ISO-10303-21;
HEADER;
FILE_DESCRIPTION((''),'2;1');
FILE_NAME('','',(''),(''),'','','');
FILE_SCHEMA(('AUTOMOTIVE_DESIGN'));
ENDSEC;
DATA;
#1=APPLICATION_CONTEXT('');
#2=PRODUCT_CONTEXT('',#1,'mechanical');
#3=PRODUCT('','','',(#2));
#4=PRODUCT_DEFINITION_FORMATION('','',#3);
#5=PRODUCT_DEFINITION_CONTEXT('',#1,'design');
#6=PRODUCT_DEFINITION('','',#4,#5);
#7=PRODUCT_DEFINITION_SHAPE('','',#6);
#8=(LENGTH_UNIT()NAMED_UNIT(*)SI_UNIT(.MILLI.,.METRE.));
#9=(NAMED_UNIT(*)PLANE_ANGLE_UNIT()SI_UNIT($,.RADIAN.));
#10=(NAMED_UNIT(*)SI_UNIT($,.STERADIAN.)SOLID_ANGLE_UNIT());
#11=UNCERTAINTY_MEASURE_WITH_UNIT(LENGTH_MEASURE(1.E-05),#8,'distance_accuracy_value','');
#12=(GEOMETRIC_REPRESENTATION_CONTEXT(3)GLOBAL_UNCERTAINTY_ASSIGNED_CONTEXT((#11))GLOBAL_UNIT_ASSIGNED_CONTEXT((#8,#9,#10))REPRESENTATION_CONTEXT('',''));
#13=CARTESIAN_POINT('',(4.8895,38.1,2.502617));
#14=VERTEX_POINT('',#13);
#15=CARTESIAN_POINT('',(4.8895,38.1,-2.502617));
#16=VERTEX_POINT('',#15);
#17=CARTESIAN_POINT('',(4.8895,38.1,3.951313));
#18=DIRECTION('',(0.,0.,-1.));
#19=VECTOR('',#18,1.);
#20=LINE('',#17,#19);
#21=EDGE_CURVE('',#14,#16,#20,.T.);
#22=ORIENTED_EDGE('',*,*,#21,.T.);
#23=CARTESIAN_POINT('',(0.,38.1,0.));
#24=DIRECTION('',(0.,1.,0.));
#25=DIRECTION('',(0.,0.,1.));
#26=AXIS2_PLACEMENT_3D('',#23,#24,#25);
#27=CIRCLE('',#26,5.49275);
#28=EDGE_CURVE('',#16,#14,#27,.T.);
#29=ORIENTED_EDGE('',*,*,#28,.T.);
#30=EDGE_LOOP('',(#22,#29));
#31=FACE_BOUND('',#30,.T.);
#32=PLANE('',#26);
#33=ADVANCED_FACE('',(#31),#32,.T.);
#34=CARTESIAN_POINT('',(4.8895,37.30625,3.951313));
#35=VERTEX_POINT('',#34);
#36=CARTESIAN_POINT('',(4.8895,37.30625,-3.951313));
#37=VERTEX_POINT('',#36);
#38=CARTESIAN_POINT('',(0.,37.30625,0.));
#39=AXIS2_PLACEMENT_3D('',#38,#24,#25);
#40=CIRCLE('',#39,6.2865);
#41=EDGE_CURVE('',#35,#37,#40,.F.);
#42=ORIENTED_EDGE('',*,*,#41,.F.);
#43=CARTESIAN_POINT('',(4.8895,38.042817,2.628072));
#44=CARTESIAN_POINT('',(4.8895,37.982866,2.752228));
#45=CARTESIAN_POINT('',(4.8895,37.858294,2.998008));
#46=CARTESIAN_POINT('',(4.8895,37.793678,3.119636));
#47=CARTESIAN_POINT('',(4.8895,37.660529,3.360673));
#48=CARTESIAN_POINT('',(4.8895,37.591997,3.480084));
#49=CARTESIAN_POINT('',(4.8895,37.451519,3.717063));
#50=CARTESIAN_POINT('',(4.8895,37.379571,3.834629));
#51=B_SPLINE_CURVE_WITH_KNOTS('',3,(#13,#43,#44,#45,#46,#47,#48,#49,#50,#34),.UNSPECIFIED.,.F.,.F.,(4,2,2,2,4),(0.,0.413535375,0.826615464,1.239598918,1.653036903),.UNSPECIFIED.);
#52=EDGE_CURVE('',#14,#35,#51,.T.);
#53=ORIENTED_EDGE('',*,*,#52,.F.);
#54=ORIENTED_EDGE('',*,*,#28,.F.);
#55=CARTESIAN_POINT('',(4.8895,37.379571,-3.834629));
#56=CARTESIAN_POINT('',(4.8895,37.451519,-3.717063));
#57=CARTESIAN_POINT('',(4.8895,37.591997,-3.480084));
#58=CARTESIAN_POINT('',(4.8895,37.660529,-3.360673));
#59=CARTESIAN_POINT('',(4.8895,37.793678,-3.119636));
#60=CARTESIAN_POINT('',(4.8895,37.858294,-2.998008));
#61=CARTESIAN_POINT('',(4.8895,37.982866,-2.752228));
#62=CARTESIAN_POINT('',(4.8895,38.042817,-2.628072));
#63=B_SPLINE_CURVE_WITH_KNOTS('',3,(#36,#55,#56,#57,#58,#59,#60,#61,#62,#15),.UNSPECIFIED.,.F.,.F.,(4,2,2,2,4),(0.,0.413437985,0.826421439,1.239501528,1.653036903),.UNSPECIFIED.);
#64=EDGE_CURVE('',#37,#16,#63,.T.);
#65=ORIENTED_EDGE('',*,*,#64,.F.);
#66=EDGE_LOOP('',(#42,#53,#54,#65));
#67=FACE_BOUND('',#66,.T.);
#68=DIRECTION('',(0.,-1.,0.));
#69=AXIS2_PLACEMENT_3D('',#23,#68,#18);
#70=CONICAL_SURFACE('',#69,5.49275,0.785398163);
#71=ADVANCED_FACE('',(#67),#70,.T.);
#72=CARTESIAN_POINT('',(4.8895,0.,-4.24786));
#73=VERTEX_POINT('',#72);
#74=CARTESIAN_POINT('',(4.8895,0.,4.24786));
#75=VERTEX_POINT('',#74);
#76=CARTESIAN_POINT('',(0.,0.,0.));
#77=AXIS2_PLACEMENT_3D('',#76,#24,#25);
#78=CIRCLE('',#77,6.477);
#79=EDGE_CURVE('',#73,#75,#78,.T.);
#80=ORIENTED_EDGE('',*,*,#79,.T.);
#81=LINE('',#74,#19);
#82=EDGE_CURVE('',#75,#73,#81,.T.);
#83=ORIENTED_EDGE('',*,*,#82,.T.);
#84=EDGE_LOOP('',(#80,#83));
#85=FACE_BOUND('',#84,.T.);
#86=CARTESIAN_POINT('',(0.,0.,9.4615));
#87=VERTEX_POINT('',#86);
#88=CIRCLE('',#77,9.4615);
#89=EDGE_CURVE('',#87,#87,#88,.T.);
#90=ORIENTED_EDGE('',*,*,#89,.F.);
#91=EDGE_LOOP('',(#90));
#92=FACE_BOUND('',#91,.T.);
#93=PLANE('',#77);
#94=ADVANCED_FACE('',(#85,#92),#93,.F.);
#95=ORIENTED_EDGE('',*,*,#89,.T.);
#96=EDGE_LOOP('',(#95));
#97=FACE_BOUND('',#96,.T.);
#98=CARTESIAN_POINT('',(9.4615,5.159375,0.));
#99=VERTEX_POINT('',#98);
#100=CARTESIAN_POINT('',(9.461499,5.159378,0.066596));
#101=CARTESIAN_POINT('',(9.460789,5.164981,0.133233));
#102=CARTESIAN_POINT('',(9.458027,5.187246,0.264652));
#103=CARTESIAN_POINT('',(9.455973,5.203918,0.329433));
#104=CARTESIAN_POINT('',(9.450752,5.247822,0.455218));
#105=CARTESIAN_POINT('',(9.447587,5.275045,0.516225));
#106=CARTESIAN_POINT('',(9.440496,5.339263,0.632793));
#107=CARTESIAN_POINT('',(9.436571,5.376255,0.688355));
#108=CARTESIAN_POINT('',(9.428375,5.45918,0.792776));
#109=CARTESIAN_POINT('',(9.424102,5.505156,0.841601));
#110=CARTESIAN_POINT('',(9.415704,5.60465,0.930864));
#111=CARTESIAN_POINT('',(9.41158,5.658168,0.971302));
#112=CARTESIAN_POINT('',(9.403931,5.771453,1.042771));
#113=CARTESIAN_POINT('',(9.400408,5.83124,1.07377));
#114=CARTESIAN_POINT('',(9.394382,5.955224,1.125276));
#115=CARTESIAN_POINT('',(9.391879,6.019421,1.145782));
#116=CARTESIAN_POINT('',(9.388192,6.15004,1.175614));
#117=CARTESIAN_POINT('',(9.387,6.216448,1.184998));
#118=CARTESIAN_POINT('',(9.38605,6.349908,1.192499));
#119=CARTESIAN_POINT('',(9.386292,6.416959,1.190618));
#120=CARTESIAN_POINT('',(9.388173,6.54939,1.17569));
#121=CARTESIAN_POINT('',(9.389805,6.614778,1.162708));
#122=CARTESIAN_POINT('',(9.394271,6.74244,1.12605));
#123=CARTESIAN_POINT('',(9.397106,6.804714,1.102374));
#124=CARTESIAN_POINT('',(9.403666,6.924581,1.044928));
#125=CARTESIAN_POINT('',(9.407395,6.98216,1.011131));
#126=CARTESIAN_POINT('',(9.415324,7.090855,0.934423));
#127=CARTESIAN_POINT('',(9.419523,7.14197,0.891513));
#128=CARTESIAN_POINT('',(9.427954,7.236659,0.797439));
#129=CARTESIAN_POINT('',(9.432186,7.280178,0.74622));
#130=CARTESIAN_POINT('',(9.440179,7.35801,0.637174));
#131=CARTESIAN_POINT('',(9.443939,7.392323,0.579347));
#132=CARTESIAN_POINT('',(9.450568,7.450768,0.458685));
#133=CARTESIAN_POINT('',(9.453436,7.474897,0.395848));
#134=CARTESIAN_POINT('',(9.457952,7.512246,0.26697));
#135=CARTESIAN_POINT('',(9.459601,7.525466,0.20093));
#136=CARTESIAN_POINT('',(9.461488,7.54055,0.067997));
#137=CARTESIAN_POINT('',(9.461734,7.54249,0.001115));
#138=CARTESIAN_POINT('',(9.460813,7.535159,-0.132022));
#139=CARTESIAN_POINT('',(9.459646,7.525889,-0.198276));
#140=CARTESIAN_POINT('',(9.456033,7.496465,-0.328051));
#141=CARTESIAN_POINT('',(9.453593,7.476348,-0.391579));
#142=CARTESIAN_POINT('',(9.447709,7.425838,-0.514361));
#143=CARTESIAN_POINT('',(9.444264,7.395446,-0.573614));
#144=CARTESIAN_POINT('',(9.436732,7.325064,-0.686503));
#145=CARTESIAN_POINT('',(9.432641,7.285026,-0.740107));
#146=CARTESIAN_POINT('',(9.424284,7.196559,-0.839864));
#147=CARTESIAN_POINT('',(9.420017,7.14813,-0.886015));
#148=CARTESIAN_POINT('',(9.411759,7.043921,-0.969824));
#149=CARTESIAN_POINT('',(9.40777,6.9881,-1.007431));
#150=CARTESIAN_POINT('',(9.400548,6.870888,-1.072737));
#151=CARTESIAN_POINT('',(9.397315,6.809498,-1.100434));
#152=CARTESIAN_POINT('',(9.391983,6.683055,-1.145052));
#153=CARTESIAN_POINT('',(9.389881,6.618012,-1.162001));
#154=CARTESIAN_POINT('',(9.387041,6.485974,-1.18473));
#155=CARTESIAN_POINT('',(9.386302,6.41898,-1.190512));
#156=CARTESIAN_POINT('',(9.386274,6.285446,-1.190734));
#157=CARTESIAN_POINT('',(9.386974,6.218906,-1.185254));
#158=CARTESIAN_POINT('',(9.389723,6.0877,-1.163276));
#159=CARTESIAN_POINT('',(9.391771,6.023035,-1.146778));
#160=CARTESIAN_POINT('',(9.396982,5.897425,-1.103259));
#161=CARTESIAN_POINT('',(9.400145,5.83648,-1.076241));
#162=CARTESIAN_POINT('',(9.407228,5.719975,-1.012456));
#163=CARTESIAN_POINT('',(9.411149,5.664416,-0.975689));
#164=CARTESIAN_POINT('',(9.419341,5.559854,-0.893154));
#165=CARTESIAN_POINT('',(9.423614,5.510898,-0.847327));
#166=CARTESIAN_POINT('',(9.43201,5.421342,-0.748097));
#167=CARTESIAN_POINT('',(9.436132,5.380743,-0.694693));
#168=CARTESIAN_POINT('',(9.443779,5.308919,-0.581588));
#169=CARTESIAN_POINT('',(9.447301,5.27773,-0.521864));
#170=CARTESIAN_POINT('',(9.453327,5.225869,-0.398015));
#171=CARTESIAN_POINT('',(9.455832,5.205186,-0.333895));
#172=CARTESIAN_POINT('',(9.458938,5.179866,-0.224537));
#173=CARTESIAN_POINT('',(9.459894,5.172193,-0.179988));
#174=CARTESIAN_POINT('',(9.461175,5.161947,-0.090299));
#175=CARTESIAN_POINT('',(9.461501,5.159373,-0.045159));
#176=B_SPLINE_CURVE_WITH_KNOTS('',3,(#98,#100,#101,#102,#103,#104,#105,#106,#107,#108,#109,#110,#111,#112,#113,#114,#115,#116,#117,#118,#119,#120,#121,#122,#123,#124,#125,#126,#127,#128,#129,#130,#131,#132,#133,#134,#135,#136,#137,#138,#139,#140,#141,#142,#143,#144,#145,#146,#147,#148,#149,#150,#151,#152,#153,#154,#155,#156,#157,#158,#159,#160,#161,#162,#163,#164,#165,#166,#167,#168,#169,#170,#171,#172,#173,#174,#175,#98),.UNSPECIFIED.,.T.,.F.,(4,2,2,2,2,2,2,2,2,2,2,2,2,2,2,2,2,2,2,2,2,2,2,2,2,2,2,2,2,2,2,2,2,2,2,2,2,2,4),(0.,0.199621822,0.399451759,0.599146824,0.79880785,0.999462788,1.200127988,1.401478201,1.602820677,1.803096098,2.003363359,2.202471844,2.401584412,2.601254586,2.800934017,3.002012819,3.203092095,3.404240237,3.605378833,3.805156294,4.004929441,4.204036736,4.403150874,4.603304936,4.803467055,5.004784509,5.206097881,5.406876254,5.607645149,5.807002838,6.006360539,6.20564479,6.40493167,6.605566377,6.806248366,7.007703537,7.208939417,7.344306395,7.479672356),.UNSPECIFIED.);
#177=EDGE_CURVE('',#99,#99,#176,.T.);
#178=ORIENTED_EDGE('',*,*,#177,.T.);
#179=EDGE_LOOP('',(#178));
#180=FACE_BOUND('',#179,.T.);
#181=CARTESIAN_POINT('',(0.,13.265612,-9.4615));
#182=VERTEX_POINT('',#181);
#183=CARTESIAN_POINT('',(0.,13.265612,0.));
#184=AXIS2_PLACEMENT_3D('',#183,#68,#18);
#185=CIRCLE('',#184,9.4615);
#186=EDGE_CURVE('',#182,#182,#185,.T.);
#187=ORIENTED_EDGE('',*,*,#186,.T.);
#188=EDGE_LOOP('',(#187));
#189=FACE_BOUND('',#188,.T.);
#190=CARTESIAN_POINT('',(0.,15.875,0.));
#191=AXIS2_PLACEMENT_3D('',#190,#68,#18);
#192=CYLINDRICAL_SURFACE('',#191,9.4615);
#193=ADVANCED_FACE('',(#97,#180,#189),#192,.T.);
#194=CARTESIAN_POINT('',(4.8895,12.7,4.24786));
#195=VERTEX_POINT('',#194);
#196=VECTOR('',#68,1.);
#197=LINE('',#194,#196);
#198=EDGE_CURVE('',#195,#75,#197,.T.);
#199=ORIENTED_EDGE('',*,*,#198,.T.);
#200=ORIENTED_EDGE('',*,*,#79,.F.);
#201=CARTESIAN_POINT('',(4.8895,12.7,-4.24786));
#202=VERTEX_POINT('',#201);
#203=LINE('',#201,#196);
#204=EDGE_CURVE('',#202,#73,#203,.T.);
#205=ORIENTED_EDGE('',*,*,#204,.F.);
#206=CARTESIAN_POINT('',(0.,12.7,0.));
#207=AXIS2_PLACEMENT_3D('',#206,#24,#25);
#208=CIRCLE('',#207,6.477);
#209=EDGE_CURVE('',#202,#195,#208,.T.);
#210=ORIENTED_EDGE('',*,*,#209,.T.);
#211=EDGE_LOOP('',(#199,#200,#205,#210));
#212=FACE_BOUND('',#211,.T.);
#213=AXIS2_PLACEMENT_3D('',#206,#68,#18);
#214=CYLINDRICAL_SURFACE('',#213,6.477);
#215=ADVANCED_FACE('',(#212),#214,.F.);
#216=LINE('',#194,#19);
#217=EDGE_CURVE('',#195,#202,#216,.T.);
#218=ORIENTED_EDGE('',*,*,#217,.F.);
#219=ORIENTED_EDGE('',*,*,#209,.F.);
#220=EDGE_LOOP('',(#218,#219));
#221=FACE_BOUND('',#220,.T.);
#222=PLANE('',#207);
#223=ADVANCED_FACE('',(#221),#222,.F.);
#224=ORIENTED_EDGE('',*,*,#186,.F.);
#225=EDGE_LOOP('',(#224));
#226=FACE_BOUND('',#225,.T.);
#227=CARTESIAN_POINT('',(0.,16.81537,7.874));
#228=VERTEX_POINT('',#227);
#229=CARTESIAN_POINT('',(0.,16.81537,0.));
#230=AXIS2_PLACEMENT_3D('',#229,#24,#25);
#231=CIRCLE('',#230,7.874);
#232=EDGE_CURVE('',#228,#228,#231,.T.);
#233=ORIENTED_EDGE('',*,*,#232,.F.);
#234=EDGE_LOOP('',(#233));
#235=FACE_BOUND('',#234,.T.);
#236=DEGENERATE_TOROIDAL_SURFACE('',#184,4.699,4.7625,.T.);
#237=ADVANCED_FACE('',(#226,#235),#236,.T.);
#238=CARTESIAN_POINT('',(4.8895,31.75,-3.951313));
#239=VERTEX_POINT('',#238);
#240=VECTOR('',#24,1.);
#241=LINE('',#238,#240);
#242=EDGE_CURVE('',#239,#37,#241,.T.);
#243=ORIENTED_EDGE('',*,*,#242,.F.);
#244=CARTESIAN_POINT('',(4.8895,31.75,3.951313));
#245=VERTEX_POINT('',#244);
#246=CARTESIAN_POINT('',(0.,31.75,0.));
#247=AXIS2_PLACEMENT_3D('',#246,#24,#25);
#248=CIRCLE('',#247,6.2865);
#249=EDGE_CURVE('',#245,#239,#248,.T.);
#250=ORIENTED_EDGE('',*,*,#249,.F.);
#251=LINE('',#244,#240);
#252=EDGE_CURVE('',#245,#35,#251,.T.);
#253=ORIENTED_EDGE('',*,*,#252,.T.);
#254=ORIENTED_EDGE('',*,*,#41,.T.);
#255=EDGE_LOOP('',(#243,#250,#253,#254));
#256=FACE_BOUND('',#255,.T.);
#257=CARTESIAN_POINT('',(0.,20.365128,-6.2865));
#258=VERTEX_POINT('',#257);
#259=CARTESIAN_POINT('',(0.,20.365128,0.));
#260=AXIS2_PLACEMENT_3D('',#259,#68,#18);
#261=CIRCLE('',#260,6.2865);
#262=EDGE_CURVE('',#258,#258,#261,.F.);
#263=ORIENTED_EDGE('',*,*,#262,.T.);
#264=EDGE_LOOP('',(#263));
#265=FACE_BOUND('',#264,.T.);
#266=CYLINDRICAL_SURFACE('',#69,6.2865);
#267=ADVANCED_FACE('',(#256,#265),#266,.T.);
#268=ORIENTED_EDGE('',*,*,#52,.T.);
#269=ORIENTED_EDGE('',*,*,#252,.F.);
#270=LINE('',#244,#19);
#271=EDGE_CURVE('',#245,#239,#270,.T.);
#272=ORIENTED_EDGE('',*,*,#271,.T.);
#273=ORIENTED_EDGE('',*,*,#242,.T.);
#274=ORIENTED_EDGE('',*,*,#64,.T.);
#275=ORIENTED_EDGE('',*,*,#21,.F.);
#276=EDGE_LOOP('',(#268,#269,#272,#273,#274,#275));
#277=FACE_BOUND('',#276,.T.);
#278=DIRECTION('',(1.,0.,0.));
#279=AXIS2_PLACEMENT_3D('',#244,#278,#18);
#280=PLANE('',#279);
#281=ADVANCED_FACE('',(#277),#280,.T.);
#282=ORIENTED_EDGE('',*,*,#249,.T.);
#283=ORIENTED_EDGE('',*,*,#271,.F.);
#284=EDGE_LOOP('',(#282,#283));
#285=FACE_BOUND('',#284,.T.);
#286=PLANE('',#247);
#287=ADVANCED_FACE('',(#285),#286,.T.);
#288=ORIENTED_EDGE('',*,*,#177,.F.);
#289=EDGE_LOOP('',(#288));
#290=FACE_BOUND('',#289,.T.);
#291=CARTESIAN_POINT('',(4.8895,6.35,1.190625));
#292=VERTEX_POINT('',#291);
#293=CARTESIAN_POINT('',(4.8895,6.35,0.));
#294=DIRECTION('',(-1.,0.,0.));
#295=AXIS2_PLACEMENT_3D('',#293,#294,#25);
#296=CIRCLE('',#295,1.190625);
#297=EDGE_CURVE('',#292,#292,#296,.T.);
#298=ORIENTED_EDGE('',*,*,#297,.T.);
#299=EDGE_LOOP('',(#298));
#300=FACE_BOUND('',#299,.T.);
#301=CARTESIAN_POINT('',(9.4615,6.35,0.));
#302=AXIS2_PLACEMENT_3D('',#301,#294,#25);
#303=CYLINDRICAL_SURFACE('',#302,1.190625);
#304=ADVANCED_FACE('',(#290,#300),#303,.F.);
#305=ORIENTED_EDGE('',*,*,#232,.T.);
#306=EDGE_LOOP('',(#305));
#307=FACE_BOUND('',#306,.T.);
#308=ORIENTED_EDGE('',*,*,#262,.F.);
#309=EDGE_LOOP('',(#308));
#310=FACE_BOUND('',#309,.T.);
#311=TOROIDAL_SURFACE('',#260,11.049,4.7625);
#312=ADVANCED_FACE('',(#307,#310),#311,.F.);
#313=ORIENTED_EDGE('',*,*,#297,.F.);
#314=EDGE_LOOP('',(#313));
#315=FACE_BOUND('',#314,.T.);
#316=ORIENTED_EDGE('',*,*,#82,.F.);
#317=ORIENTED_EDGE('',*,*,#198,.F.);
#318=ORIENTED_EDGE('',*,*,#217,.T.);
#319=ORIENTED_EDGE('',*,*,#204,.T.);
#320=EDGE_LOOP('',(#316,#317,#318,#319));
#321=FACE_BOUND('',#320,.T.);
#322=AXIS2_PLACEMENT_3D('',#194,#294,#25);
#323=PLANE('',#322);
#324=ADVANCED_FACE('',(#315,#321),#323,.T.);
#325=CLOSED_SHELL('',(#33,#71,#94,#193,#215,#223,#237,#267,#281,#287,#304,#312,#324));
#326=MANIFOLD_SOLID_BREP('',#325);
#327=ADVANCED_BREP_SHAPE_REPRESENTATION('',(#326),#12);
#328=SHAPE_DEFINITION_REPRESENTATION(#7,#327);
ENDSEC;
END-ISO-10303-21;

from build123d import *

# Parameters (mm, degrees)
SKETCH1_R           = 6.2865
BASE_EXTRUDE_DEPTH  = 38.1
SKETCH3_R           = 9.4615
BOSS_EXTRUDE1_DEPTH = 15.875
CUT_EXTRUDE1_DEPTH  = 12.7
FILLET1_R           = 4.7625
FILLET2_R           = 4.7625
SKETCH5_R           = 1.190625
CUT_EXTRUDE2_DEPTH  = 42.798101456
CUT_EXTRUDE3_START  = -6.35
CUT_EXTRUDE3_DEPTH  = 6.35
CHAMFER1_SIZE       = 0.79375


with BuildPart() as part:
    # Sketch1 → Base-Extrude (new body)
    with BuildSketch(Plane(origin=(0, 0, 0), x_dir=(-1, 0, 0), z_dir=(0, 1, 0))):
        with Locations(Location((0, 0, 0), (0, 0, 270))):
            Circle(SKETCH1_R)
    extrude(amount=BASE_EXTRUDE_DEPTH)

    # Sketch3 → Boss-Extrude1 (add)
    with BuildSketch(Plane(origin=(0, 0, 0), x_dir=(-1, 0, 0), z_dir=(0, 1, 0))):
        with Locations(Location((0, 0, 0), (0, 0, 90))):
            Circle(SKETCH3_R)
    extrude(amount=BOSS_EXTRUDE1_DEPTH)

    # Sketch4 → Cut-Extrude1 (cut)
    with BuildSketch(Plane(origin=(0, 0, 0), x_dir=(-1, 0, 0), z_dir=(0, 1, 0))):
        with BuildLine():
            Line((-4.8895, 4.247860491), (-4.8895, -4.247860491))
            ThreePointArc((-4.8895, -4.247860491), (6.477, 0), (-4.8895, 4.247860491))
        make_face()
    extrude(amount=CUT_EXTRUDE1_DEPTH, mode=Mode.SUBTRACT)

    # Fillet1
    # the kernel refuses this fillet: 4.7625 mm, written as the material it adds along each edge
    with BuildSketch(Plane(origin=(0, 15.875, 0), x_dir=(0, 0, -1), z_dir=(-1, 0, 0))) as fillet1_piece_1:
        with BuildLine():
            CenterArc((11.049, -4.490128061), FILLET1_R, 109.471220634, 70.528779366)
            Line((6.2865, -4.490128061), (6.19125, -4.490128061))
            Line((6.19125, -4.490128061), (6.19125, 0))
            Line((6.19125, 0), (6.2865, 0.09525))
            ThreePointArc((6.2865, 0.09525), (7.874, 0.09525), (9.42975, 0.089802561))
            Line((9.42975, 0.089802561), (9.4615, 0))
        make_face()
    revolve(axis=Axis((0, 15.875, 0), (0, -1, 0)))

    # Fillet2
    fillet2_edges = [part.edges().sort_by_distance(p)[0] for p in [
        (9.4615, 15.875, 0),
    ]]
    fillet(fillet2_edges, radius=FILLET2_R)

    # Sketch5 → Cut-Extrude2 (cut, through all)
    with BuildSketch(Plane.ZY.offset(-4.8895)):
        with Locations((0, 6.35)):
            Circle(SKETCH5_R)
    extrude(amount=-CUT_EXTRUDE2_DEPTH, mode=Mode.SUBTRACT)

    # Sketch7 → Cut-Extrude3 (cut)
    with BuildSketch(Plane(origin=(0, 38.1, 0), x_dir=(-1, 0, 0), z_dir=(0, 1, 0)).offset(CUT_EXTRUDE3_START)):
        with BuildLine():
            Line((-4.8895, 3.951312693), (-4.8895, -3.951312693))
            ThreePointArc((-4.8895, -3.951312693), (-6.2865, 0), (-4.8895, 3.951312693))
        make_face()
    extrude(amount=CUT_EXTRUDE3_DEPTH, mode=Mode.SUBTRACT)

    # Chamfer1
    chamfer1_edges = [part.edges().sort_by_distance(p)[0] for p in [
        (-5.67274226, 38.1, 2.70925774),
    ]]
    chamfer(chamfer1_edges, length=CHAMFER1_SIZE)


solid = part.part
